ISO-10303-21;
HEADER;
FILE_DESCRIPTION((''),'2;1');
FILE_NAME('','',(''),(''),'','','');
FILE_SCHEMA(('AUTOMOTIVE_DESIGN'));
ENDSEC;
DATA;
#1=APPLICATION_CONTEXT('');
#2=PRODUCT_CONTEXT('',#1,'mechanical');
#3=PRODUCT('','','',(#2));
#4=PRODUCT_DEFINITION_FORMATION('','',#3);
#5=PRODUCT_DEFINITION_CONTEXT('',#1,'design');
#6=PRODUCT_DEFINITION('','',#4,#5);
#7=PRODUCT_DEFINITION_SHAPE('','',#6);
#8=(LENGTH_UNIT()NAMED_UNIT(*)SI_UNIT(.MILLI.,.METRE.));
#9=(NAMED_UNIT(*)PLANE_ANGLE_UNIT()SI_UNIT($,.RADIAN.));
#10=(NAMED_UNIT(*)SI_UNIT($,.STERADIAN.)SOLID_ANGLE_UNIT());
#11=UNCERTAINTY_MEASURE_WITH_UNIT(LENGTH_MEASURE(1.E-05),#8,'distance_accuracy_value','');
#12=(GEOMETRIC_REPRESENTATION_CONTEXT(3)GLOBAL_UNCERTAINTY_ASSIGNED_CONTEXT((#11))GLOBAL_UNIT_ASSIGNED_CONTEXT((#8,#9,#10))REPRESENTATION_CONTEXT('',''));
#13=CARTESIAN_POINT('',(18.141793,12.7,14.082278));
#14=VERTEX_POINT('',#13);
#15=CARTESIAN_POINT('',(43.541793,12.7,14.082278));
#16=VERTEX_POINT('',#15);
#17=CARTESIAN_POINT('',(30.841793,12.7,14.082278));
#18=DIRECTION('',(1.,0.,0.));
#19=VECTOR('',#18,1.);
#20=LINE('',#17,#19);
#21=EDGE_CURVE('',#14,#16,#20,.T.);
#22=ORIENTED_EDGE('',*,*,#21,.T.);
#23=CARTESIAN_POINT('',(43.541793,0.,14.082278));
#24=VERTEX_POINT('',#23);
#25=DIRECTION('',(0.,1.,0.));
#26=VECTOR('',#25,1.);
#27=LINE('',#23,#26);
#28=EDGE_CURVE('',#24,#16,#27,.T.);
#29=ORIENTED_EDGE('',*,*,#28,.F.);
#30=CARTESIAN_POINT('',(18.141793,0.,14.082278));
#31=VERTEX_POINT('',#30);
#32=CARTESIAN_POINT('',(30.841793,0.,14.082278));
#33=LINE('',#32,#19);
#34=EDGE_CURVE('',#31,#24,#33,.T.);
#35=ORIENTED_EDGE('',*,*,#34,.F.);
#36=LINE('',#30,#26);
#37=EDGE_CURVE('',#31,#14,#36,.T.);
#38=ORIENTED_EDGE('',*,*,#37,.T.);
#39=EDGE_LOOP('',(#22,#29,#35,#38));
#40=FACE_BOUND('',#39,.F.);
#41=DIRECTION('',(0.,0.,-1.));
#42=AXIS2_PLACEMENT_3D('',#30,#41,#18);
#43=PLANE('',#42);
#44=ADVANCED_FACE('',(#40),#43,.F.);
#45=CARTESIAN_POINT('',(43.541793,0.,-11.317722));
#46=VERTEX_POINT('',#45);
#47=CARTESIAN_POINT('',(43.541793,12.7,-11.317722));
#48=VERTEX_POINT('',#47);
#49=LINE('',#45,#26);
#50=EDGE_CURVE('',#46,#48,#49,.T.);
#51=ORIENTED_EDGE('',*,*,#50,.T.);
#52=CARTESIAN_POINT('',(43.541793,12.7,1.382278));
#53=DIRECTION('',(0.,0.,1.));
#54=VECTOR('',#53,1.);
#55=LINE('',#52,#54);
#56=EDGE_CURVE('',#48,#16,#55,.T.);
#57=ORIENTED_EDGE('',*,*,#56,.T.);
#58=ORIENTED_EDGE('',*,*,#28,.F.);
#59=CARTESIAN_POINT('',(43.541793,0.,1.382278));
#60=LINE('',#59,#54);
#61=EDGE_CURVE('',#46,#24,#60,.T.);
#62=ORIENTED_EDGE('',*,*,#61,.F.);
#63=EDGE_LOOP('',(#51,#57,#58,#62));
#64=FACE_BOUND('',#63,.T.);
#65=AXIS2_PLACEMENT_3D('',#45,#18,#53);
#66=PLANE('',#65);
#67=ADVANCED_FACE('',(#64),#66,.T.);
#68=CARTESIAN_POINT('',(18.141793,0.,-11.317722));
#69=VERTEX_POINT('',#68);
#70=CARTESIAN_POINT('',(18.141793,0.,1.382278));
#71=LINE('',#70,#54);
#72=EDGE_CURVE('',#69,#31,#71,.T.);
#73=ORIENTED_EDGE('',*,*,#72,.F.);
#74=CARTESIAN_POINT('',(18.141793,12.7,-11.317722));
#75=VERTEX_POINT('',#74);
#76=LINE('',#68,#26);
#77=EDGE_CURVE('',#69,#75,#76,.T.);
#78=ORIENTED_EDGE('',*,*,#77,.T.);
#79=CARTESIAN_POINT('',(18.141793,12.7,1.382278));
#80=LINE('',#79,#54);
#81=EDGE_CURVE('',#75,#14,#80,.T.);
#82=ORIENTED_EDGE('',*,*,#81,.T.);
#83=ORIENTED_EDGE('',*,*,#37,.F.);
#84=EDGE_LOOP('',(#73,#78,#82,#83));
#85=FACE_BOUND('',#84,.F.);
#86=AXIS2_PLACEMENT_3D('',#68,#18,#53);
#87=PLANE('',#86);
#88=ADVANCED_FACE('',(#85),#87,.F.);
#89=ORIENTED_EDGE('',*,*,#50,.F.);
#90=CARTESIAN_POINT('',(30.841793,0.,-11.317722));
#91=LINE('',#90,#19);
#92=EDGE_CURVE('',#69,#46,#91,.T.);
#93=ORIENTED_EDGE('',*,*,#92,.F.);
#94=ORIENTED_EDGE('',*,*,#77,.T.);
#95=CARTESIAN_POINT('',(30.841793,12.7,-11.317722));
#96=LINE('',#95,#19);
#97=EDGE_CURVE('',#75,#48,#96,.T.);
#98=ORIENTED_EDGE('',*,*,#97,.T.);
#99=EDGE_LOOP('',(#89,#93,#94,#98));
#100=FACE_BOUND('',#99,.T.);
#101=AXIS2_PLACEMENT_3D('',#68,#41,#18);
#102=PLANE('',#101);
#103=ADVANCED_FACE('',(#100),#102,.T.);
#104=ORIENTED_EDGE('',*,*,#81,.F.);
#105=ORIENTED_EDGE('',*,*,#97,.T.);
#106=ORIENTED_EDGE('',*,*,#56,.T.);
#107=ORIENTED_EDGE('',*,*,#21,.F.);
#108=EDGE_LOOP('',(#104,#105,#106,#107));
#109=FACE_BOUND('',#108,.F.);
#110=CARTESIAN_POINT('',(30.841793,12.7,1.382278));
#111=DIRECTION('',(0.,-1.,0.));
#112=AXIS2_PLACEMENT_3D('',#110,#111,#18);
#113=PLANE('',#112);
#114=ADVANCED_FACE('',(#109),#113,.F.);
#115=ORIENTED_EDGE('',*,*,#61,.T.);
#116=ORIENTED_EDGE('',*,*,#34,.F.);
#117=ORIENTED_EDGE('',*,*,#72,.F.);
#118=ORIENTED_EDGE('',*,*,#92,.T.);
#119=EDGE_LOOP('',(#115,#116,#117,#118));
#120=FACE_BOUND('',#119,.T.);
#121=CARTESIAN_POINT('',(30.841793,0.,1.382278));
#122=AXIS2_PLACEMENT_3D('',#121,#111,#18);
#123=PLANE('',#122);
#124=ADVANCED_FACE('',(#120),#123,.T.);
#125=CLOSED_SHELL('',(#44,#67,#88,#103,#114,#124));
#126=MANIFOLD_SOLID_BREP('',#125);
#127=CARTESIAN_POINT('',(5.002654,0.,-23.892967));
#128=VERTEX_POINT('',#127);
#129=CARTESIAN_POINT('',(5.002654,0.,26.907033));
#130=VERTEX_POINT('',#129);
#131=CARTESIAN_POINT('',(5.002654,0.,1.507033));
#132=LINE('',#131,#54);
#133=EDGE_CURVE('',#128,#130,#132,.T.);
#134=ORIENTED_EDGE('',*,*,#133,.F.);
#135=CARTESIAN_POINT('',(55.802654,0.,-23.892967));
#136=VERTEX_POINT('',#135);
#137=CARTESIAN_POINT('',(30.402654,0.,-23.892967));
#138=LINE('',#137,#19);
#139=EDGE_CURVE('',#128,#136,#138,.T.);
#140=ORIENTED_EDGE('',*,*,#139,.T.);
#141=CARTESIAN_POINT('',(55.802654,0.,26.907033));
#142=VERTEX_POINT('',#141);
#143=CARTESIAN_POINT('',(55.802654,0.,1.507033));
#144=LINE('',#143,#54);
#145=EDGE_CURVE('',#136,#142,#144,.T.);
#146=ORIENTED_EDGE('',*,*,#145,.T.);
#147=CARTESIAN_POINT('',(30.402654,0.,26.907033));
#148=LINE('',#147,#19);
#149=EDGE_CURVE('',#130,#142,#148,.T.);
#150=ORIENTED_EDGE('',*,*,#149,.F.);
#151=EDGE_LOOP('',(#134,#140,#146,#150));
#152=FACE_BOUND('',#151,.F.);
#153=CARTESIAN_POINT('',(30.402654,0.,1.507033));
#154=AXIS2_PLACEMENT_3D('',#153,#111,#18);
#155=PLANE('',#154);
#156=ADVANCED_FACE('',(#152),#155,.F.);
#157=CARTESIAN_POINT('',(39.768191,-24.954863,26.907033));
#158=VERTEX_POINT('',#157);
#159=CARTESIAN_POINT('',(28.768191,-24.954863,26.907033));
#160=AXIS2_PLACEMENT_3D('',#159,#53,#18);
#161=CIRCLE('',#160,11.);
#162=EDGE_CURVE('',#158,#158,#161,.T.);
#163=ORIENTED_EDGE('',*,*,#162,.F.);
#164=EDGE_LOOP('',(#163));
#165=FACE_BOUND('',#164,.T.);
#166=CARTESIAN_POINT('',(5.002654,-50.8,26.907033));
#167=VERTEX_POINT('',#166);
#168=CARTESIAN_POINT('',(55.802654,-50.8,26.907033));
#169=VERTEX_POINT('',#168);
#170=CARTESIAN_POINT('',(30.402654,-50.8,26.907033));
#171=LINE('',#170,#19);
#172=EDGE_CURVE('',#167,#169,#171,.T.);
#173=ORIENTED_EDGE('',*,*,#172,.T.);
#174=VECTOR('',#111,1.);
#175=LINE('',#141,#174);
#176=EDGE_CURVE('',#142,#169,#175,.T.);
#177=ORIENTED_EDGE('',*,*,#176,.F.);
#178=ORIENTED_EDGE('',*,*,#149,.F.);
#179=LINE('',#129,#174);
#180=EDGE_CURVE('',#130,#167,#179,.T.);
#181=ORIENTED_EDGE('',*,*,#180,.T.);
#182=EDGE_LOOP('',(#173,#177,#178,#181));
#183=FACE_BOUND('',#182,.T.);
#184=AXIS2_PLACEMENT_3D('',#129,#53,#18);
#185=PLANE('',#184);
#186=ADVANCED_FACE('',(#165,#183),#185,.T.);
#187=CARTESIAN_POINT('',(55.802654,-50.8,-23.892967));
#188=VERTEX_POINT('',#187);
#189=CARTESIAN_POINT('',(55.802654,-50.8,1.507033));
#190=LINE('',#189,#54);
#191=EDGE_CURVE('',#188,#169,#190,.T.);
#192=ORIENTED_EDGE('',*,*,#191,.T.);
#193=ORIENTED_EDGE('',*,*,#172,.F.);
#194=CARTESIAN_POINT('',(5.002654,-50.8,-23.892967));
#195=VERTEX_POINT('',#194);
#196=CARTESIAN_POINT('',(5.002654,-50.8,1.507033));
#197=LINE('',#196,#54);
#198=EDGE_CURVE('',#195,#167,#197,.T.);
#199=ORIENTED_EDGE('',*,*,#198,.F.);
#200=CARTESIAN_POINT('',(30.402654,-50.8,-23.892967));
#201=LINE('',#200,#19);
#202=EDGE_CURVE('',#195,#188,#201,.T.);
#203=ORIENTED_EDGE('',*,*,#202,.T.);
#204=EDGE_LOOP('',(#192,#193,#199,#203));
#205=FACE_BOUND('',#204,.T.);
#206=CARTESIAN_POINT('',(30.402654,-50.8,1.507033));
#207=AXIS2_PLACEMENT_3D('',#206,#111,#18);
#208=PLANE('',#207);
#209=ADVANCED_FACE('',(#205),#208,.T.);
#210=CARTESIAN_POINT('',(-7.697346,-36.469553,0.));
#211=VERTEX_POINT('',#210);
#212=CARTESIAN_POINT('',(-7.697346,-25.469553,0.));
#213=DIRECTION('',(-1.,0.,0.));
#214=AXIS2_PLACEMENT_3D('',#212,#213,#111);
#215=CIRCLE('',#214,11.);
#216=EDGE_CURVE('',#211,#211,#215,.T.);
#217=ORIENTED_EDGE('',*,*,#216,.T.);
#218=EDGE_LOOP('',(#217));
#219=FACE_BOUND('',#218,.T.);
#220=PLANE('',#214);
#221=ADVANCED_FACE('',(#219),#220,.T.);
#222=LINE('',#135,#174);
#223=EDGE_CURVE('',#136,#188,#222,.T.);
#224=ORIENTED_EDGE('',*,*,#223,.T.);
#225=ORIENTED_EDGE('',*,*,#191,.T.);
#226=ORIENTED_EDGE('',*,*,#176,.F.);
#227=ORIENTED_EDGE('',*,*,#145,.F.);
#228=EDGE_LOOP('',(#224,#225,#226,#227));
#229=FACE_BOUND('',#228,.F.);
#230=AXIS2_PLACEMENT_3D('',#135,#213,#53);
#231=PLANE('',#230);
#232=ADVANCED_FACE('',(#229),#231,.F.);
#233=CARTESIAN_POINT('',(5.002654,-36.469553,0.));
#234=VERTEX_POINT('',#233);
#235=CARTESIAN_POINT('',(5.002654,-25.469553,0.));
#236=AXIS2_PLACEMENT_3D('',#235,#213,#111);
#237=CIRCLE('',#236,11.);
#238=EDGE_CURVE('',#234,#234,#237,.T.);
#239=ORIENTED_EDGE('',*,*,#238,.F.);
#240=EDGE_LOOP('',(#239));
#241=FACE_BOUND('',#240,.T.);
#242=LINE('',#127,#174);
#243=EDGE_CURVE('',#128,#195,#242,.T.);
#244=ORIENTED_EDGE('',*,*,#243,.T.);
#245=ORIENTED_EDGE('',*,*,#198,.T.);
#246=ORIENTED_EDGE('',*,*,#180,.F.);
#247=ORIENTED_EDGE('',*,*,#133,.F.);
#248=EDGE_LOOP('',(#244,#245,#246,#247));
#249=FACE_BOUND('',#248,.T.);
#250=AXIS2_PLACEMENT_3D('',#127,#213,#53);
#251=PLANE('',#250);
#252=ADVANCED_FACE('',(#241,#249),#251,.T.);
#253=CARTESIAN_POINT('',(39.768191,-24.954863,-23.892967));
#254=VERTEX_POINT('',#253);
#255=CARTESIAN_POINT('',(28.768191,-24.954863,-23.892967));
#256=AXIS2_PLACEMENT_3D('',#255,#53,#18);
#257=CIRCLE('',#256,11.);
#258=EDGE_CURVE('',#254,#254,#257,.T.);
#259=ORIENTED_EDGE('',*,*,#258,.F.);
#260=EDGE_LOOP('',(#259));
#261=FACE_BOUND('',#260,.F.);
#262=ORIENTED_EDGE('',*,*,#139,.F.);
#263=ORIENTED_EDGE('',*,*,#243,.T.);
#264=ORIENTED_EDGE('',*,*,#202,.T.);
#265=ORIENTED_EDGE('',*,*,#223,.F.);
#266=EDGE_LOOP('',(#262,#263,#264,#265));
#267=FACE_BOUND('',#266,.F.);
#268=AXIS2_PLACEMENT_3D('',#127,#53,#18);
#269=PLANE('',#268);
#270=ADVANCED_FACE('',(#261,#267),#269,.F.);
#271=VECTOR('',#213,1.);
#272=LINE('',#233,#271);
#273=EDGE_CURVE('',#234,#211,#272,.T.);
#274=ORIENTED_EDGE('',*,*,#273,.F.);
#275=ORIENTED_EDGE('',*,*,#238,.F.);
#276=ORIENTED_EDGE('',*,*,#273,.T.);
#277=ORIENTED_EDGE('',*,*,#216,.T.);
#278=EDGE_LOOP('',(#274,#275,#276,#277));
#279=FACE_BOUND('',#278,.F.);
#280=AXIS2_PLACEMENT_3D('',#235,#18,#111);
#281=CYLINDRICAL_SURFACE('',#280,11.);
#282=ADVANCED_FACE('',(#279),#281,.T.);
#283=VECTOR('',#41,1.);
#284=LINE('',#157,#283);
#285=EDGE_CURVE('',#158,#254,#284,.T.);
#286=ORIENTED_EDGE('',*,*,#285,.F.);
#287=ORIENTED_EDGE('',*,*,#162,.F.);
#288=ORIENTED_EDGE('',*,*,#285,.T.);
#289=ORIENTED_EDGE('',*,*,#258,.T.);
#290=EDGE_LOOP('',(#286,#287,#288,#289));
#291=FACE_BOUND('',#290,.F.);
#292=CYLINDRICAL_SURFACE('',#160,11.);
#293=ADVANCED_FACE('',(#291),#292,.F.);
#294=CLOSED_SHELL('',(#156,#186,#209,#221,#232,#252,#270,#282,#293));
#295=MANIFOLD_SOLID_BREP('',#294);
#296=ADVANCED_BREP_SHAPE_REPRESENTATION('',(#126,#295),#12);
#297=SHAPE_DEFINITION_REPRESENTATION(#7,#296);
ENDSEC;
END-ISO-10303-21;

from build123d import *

# Parameters (mm, degrees)
F0_W     = 50.8
F0_H     = 50.8
F1_DEPTH = 50.8
F2_W     = 25.4
F2_H     = 25.4
F4_DEPTH = 12.7
F6_R     = 11
F7_DEPTH = 12.7
F8_R     = 11
F9_DEPTH = 50.8


# Not quite as in the source:
# - a feature names something its author has since deleted; it is built from what else it names


with BuildPart() as f1:
    # F0 (on Front) → F1 (new body)
    with BuildSketch(Plane.XZ):
        with Locations((30.402654475, 1.5070329696)):
            Rectangle(F0_W, F0_H)
    extrude(amount=F1_DEPTH)

    # F6 (on face) → F7 (join)
    with BuildSketch(Plane(origin=(5.002654475, 0, 0), x_dir=(0, -1, 0), z_dir=(-1, 0, 0))):
        with Locations((25.4695527256, 0)):
            Circle(F6_R)
    extrude(amount=F7_DEPTH)

    # F8 (on face) → F9 (cut)
    with BuildSketch(Plane.XY.offset(26.9070329696)):
        with Locations((28.7681911141, -24.9548628926)):
            Circle(F8_R)
    extrude(amount=-F9_DEPTH, mode=Mode.SUBTRACT)


with BuildPart() as f4:
    # F2 (on Front) → F4 (new body)
    with BuildSketch(Plane.XZ):
        with Locations((30.8417927802, 1.382278432)):
            Rectangle(F2_W, F2_H)
    extrude(amount=-F4_DEPTH)


solid = Compound([f1.part, f4.part])
